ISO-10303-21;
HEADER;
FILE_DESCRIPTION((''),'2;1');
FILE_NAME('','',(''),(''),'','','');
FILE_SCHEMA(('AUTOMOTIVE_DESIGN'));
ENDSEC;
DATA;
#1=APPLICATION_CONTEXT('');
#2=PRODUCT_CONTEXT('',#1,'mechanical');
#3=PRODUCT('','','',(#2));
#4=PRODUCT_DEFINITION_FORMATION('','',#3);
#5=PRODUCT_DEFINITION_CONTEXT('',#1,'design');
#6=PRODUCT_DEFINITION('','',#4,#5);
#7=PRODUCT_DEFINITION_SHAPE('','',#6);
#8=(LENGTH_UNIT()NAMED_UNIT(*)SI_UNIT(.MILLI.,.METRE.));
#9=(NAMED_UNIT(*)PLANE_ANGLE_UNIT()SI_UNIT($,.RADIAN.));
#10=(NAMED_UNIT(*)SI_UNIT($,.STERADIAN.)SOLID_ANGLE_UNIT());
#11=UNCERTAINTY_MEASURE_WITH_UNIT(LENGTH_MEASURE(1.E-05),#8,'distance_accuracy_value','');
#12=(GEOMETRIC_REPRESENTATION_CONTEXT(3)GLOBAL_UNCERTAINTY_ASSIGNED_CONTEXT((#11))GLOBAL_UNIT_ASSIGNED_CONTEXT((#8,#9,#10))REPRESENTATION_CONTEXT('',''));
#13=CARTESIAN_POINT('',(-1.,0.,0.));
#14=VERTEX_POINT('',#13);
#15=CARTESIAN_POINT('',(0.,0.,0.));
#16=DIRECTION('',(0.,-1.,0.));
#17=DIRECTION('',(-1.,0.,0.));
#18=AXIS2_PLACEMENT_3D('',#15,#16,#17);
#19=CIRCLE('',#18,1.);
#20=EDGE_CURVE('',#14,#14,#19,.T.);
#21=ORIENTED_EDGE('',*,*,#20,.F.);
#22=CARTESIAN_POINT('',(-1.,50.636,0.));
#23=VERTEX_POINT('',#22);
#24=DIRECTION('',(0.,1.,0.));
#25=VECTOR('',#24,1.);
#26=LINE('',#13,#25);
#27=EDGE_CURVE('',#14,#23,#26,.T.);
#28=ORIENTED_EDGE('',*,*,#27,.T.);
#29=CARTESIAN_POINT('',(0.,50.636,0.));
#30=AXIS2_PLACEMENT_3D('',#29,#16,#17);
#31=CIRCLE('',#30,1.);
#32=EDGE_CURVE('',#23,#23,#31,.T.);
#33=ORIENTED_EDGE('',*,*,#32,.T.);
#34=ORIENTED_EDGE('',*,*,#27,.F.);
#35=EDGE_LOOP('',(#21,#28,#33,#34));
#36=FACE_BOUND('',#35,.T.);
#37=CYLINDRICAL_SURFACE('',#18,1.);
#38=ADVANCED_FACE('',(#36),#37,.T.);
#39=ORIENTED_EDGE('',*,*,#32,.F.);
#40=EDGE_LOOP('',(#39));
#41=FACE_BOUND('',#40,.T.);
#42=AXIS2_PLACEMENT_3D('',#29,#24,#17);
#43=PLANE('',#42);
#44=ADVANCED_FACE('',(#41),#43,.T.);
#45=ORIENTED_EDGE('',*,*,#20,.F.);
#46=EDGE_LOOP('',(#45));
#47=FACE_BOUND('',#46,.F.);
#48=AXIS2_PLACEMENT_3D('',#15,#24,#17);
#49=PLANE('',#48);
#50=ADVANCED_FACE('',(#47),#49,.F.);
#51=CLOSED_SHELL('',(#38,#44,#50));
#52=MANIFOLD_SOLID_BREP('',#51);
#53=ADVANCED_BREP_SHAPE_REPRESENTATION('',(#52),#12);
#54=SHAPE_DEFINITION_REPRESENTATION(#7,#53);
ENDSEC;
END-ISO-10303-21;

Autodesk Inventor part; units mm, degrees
ref_plane "YZ Plane" through (0, 0, 0) normal (1, 0, 0) x (0, 1, 0)
ref_plane "XZ Plane" through (0, 0, 0) normal (0, 1, 0) x (-1, 0, 0)
ref_plane "XY Plane" through (0, 0, 0) normal (0, 0, 1) x (1, 0, 0)
sketch "Sketch1" plane through (0, 0, 0) normal (0, 1, 0) x (-1, 0, 0)
  circle A0 centre (0, 0) radius 1
  dimension "d0" = 2
extrude "Extrusion1" add sketch "Sketch1" along normal blind 55
move faces "Move1" translate (0, -2.5, 0) faces at (-0.5848, 55, -0.397)
move faces "Move2" translate (0, -0.002, 0) faces at (-0.2495, 52.5, 0.221)
move faces "Move3" translate (0, -1.862, 0) faces at (-0.2495, 52.498, 0.221)
properties part number "LOOP2_COLL_L"
